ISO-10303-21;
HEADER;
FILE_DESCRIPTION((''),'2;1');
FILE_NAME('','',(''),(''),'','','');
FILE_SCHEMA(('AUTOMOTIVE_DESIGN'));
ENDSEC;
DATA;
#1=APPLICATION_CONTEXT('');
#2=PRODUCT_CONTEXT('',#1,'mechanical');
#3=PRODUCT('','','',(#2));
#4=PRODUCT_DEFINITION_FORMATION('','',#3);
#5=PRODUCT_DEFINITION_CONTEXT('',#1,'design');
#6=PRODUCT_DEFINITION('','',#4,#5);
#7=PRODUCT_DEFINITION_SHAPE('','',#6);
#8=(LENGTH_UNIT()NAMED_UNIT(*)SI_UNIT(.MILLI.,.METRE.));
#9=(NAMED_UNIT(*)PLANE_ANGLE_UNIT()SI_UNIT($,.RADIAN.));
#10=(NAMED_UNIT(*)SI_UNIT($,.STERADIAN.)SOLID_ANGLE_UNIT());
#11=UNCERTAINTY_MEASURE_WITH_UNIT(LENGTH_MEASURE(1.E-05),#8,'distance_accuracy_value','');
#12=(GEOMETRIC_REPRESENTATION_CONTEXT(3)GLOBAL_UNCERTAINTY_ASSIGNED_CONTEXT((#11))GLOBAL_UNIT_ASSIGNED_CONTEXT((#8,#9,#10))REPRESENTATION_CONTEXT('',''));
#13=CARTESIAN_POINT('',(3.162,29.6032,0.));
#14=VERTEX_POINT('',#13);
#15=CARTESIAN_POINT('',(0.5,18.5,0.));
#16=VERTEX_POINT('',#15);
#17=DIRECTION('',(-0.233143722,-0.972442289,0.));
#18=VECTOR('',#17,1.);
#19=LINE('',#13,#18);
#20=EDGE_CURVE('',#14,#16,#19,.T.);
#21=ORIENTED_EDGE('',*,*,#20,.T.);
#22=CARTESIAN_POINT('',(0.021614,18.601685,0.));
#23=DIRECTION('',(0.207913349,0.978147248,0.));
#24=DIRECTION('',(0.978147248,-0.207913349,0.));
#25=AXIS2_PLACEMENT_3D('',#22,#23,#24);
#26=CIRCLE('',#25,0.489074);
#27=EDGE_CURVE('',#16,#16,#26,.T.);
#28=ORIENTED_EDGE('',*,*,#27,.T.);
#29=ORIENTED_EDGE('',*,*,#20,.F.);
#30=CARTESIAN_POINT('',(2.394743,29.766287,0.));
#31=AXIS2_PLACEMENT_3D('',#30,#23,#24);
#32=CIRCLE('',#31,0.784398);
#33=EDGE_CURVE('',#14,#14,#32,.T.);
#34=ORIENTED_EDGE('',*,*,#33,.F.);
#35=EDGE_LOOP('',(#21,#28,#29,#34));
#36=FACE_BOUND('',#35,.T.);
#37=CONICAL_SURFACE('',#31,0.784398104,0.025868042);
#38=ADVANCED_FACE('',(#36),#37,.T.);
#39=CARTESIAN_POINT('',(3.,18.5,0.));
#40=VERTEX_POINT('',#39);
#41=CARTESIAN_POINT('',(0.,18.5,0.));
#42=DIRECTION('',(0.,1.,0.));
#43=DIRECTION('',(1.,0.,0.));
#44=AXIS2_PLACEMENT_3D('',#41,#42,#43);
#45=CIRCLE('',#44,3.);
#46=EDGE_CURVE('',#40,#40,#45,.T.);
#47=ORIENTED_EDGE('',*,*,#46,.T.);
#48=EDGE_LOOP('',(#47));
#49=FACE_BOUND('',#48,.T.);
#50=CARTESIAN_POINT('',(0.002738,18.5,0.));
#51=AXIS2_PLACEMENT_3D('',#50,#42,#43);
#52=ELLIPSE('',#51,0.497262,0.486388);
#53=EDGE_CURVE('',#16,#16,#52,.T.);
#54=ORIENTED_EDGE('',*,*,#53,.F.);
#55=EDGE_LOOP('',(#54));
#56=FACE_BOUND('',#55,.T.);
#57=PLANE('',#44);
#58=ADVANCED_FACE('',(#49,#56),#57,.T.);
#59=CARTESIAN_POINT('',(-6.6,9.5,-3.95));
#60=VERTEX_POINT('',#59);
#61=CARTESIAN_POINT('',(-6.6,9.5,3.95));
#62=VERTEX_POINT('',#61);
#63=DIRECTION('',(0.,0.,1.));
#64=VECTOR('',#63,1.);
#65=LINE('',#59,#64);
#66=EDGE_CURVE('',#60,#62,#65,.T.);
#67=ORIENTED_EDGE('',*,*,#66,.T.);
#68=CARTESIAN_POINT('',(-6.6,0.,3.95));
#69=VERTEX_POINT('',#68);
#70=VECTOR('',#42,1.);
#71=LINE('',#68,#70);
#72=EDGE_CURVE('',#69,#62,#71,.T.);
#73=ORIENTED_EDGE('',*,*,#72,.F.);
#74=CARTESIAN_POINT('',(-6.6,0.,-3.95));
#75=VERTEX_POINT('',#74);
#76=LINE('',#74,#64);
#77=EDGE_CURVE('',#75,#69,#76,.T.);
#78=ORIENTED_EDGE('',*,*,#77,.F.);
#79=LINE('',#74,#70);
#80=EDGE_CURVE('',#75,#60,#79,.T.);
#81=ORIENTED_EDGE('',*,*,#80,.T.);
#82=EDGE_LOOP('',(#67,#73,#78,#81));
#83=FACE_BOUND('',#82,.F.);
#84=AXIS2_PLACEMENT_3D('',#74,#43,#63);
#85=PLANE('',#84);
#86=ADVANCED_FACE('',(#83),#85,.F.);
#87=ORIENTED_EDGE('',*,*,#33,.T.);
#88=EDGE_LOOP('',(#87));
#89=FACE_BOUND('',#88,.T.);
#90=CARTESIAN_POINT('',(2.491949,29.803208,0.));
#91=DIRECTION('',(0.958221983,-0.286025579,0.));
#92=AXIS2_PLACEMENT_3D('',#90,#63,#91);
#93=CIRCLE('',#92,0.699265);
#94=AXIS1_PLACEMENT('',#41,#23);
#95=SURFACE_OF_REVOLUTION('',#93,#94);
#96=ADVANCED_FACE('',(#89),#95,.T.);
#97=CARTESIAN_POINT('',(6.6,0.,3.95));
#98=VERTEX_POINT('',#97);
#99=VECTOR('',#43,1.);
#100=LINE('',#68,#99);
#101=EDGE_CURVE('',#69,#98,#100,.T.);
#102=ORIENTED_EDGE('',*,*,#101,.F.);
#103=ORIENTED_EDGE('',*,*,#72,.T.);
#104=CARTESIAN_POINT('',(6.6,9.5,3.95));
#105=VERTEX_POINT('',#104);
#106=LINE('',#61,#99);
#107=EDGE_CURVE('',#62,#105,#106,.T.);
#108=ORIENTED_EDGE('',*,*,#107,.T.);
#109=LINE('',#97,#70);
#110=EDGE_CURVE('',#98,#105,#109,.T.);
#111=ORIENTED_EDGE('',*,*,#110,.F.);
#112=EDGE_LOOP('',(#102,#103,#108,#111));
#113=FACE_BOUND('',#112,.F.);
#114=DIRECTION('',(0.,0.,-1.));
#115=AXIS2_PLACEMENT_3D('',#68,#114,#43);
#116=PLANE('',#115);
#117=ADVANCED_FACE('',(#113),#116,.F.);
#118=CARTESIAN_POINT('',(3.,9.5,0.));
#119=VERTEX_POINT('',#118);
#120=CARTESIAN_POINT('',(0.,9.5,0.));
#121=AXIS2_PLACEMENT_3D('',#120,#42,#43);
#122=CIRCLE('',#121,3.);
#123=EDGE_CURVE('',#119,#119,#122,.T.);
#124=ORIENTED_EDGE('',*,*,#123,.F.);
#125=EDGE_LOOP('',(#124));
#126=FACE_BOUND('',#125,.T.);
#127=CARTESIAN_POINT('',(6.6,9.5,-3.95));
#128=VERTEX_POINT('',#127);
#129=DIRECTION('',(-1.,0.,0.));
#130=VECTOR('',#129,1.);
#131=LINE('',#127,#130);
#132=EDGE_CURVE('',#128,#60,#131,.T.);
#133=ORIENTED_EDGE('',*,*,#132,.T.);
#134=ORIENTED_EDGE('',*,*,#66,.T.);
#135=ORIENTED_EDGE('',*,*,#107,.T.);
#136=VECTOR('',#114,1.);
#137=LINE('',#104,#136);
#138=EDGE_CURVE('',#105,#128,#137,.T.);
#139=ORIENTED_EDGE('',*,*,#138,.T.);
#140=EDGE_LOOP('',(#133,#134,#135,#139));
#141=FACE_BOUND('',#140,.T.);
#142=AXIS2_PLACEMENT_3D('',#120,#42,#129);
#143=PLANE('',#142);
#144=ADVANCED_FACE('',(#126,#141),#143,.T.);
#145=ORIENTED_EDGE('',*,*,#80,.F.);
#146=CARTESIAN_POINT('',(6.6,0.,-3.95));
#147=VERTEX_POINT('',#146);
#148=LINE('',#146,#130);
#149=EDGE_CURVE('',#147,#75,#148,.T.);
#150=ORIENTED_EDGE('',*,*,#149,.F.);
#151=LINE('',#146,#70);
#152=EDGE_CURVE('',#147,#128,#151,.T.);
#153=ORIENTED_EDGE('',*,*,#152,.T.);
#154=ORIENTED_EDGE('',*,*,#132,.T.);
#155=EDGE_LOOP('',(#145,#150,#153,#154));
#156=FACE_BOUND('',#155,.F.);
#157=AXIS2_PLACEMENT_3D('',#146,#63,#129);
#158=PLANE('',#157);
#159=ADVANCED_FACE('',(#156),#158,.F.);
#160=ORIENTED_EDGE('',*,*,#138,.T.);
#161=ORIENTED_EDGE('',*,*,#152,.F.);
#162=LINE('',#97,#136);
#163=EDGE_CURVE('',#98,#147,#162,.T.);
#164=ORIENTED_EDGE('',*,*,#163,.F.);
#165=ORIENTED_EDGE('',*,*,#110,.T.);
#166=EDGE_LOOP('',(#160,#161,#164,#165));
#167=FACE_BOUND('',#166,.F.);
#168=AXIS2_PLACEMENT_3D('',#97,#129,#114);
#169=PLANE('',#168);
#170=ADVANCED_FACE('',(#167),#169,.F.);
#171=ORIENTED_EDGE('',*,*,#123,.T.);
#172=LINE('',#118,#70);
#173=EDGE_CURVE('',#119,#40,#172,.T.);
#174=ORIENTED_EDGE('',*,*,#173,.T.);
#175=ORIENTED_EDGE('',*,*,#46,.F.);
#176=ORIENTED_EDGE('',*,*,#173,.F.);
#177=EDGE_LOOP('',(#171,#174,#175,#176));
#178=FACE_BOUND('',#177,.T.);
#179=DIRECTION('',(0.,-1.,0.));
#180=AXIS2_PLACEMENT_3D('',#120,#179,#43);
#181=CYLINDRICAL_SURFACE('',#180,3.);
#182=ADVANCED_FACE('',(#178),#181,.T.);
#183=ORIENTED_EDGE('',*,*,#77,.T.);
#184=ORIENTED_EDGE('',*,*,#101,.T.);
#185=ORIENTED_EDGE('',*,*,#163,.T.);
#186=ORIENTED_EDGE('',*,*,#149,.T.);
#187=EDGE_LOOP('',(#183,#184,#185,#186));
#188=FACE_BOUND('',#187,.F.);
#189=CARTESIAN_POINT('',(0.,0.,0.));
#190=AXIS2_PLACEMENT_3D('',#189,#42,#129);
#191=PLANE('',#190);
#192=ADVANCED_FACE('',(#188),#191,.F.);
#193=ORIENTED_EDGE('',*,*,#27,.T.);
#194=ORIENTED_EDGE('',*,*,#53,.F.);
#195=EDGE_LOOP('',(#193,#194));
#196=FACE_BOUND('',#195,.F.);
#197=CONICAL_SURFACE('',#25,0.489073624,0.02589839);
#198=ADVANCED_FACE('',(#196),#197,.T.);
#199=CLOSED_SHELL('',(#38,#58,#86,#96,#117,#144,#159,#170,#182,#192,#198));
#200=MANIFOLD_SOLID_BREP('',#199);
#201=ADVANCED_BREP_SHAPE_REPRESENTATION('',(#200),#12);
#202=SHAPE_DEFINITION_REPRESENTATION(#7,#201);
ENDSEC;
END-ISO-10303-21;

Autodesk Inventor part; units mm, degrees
ref_plane "YZ Plane" through (0, 0, 0) normal (1, 0, 0) x (0, 1, 0)
ref_plane "XZ Plane" through (0, 0, 0) normal (0, 1, 0) x (-1, 0, 0)
sketch "Sketch1" plane through (0, 0, 0) normal (0, 1, 0) x (-1, 0, 0)
  line L0 (-6.6, -3.95) -> (6.6, -3.95)
  line L1 (6.6, -3.95) -> (6.6, 3.95)
  line L2 (6.6, 3.95) -> (-6.6, 3.95)
  line L3 (-6.6, 3.95) -> (-6.6, -3.95)
  line L4 (-6.6, -3.95) -> (6.6, 3.95) construction
  line L5 (6.6, -3.95) -> (-6.6, 3.95) construction
  point P0 (0, 0)
  dimension "d0" = 13.2
  dimension "d1" = 7.9
extrude "Extrusion1" add sketch "Sketch1" along normal blind 9.5
sketch "Sketch2" plane through (0, 9.5, 0) normal (0, 1, 0) x (1, 0, 0)
  circle A0 centre (0, 0) radius 3
  dimension "d4" = 6
extrude "Extrusion2" add sketch "Sketch2" along normal blind 9
ref_plane "Work Plane1" through (-6.6, 0, 0) normal (0, 0, 1) x (1, 0, 0)
sketch "Sketch3" plane through (-6.6, 0, 0) normal (0, 0, 1) x (1, 0, 0)
  line L0 (9.6, 18.5) -> (3.6, 18.5) projected
  line L1 (3.6, 9.5) -> (9.6, 9.5) projected
  line L2 (6.6, 18.5) -> (9.1507, 30.5)
  arc A0 (9.762, 29.6032) -> (9.1507, 30.5) centre (9.0919, 29.8032) ccw
  line L3 (9.762, 29.6032) -> (7.1, 18.5)
  line L4 (7.1, 18.5) -> (7.0161, 18.1501)
  line L5 (7.0161, 18.1501) -> (6.6, 18.5)
  point P0 (6.6, 0)
  dimension "d8" = 12
  dimension "d9" = 78
revolve "Revolution1" add sketch "Sketch3" angle 360 about axis through (0, 18.5, 0) along (0.2079117, 0.9781476, 0)
properties part number "switch"
